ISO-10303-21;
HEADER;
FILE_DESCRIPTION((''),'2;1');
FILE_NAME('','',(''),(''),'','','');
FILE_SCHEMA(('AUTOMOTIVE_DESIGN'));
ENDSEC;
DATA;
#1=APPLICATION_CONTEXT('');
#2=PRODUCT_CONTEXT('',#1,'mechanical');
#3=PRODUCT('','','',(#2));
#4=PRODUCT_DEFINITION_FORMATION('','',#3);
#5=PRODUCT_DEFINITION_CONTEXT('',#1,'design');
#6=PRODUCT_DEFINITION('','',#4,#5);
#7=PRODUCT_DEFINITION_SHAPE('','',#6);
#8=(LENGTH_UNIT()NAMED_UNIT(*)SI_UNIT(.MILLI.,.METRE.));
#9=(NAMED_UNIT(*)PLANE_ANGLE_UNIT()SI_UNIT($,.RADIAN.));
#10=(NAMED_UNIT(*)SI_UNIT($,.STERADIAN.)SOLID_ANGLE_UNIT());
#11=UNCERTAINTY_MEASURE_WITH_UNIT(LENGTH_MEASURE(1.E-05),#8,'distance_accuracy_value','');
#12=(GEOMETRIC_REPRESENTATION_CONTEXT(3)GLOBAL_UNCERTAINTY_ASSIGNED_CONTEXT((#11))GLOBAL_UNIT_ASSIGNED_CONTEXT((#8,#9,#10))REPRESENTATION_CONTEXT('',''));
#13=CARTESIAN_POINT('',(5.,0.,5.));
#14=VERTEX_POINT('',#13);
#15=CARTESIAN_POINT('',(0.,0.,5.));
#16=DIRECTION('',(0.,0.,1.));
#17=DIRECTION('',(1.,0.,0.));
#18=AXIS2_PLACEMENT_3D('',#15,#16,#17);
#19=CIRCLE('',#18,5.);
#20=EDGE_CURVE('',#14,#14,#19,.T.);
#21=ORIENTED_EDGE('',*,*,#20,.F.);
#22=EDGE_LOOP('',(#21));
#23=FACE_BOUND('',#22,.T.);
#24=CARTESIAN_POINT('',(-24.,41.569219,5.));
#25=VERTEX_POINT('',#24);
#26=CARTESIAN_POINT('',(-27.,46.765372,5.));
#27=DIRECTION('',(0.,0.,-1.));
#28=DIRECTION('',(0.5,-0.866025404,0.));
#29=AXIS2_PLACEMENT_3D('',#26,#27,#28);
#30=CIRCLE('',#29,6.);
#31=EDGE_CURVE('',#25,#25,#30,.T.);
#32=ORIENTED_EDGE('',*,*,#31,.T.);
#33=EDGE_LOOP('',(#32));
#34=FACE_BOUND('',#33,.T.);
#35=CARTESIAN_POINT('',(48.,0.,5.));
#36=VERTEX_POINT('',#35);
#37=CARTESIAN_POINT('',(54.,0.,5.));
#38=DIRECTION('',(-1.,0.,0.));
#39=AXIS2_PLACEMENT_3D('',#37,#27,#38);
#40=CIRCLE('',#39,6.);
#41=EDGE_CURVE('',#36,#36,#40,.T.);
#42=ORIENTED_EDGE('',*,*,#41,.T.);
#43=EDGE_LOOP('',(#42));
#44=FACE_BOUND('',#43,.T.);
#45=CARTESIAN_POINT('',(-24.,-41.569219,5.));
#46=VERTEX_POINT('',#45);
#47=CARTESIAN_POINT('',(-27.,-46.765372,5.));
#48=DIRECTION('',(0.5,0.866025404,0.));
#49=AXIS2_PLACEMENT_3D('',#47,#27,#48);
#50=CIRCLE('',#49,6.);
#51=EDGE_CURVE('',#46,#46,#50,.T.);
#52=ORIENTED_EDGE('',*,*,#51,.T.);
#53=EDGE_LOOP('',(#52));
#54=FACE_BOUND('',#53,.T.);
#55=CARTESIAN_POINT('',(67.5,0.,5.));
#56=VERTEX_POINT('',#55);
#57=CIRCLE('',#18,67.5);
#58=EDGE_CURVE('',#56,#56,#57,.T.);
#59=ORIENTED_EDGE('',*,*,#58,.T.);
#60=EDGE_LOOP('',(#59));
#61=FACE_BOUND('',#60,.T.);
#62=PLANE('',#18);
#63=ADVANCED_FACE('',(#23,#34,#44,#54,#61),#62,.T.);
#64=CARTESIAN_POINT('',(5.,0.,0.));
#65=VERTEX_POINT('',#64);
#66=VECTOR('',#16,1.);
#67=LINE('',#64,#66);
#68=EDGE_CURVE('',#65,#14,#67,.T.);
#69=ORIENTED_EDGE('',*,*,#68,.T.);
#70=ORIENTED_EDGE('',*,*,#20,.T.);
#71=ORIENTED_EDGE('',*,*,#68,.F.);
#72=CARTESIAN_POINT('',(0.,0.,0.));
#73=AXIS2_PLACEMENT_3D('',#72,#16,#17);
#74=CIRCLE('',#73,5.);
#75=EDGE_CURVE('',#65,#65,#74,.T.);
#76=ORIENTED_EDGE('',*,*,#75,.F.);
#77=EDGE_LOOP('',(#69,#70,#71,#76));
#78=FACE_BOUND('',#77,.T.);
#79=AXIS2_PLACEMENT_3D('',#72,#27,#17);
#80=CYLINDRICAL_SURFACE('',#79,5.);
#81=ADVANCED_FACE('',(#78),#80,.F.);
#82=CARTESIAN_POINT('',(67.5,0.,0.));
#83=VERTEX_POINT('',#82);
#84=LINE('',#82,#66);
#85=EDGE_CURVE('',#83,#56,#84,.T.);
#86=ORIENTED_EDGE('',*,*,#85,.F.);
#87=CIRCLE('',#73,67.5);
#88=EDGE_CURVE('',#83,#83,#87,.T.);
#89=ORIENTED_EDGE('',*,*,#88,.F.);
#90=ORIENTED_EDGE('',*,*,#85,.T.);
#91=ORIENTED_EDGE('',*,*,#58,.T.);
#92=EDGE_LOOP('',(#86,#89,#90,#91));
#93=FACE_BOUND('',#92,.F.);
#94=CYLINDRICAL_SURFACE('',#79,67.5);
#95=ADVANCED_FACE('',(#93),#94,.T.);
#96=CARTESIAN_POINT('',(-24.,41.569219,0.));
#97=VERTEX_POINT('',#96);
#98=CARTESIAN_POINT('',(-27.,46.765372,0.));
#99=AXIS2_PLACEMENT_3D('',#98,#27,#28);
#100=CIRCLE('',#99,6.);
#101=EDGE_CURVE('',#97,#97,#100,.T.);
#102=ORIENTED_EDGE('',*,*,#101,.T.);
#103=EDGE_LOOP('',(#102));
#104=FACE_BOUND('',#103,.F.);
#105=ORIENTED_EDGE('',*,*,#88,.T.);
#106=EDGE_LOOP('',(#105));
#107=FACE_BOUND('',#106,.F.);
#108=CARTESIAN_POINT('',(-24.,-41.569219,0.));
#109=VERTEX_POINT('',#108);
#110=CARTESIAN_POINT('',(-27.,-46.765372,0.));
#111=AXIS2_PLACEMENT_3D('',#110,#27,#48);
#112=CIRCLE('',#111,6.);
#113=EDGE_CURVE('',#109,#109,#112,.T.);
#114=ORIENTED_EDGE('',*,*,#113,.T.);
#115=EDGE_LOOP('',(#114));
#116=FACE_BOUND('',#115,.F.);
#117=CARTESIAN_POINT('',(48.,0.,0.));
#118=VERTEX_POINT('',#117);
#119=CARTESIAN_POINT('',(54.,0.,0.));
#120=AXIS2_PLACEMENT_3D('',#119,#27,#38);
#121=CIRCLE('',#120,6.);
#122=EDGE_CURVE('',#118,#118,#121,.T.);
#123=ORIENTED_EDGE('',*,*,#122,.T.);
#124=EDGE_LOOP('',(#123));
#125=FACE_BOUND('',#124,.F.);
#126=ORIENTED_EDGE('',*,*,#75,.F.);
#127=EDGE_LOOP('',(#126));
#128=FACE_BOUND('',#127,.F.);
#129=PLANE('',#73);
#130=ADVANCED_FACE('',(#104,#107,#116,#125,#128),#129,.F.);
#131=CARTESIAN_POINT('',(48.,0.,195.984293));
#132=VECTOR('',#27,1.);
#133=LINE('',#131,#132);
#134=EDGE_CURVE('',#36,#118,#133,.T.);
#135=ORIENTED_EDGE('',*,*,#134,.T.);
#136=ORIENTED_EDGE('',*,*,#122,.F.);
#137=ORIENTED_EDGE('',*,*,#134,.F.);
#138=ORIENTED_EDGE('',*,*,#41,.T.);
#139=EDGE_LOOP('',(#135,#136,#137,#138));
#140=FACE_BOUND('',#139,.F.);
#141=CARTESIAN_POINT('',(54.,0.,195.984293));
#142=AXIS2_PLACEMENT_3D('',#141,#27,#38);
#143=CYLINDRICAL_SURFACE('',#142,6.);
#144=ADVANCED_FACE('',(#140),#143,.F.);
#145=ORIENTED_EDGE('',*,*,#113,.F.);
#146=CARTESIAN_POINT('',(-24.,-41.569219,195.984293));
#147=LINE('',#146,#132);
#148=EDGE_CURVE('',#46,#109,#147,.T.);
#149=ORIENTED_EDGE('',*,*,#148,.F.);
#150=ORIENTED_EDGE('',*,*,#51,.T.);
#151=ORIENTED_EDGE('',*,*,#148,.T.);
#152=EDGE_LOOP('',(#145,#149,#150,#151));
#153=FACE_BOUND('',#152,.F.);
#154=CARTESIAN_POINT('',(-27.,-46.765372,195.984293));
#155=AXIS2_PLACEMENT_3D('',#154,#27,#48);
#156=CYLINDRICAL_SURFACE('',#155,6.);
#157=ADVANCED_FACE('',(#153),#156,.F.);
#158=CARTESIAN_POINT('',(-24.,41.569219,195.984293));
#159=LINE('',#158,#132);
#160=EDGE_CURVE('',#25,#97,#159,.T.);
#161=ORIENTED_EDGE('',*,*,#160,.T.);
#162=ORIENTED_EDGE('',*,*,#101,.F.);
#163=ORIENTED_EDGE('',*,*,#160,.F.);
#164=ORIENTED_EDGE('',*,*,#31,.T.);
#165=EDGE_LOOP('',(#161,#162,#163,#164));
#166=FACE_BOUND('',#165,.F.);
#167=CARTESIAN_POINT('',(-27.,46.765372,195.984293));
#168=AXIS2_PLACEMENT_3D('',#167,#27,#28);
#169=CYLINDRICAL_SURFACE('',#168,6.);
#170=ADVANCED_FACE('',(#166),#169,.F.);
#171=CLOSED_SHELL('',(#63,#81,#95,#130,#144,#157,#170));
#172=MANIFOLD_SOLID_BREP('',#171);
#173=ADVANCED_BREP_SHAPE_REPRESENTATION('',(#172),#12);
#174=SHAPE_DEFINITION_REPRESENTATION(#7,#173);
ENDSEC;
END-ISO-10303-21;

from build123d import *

# Parameters (mm, degrees)
F0_R            = 67.5
F0_R_2          = 5
F1_DEPTH        = 5
F3_D            = 12
F3_COPIES_COUNT = 3


# Not quite as in the source:
# - a pattern or mirror of a feature is missing from the dataset's text; its kind, count and spacing are read off the source's solid


with BuildPart() as f1:
    # F0 (on Top) → F1 (new body)
    with BuildSketch(Plane.XY):
        Circle(F0_R)
        Circle(F0_R_2, mode=Mode.SUBTRACT)
    extrude(amount=F1_DEPTH)

    # F3 (through all)
    with Locations(Plane.XY.offset(5)):
        with Locations((54, 0)):
            f3 = Hole(F3_D / 2)

    # F3_copies: F3 ×3 about axis
    f3_copies_axis = Axis((0, 0, 0), (0, 0, 1))
    for i in range(1, F3_COPIES_COUNT):
        add(f3.rotate(f3_copies_axis, i * 360 / F3_COPIES_COUNT), mode=Mode.SUBTRACT)


solid = f1.part
